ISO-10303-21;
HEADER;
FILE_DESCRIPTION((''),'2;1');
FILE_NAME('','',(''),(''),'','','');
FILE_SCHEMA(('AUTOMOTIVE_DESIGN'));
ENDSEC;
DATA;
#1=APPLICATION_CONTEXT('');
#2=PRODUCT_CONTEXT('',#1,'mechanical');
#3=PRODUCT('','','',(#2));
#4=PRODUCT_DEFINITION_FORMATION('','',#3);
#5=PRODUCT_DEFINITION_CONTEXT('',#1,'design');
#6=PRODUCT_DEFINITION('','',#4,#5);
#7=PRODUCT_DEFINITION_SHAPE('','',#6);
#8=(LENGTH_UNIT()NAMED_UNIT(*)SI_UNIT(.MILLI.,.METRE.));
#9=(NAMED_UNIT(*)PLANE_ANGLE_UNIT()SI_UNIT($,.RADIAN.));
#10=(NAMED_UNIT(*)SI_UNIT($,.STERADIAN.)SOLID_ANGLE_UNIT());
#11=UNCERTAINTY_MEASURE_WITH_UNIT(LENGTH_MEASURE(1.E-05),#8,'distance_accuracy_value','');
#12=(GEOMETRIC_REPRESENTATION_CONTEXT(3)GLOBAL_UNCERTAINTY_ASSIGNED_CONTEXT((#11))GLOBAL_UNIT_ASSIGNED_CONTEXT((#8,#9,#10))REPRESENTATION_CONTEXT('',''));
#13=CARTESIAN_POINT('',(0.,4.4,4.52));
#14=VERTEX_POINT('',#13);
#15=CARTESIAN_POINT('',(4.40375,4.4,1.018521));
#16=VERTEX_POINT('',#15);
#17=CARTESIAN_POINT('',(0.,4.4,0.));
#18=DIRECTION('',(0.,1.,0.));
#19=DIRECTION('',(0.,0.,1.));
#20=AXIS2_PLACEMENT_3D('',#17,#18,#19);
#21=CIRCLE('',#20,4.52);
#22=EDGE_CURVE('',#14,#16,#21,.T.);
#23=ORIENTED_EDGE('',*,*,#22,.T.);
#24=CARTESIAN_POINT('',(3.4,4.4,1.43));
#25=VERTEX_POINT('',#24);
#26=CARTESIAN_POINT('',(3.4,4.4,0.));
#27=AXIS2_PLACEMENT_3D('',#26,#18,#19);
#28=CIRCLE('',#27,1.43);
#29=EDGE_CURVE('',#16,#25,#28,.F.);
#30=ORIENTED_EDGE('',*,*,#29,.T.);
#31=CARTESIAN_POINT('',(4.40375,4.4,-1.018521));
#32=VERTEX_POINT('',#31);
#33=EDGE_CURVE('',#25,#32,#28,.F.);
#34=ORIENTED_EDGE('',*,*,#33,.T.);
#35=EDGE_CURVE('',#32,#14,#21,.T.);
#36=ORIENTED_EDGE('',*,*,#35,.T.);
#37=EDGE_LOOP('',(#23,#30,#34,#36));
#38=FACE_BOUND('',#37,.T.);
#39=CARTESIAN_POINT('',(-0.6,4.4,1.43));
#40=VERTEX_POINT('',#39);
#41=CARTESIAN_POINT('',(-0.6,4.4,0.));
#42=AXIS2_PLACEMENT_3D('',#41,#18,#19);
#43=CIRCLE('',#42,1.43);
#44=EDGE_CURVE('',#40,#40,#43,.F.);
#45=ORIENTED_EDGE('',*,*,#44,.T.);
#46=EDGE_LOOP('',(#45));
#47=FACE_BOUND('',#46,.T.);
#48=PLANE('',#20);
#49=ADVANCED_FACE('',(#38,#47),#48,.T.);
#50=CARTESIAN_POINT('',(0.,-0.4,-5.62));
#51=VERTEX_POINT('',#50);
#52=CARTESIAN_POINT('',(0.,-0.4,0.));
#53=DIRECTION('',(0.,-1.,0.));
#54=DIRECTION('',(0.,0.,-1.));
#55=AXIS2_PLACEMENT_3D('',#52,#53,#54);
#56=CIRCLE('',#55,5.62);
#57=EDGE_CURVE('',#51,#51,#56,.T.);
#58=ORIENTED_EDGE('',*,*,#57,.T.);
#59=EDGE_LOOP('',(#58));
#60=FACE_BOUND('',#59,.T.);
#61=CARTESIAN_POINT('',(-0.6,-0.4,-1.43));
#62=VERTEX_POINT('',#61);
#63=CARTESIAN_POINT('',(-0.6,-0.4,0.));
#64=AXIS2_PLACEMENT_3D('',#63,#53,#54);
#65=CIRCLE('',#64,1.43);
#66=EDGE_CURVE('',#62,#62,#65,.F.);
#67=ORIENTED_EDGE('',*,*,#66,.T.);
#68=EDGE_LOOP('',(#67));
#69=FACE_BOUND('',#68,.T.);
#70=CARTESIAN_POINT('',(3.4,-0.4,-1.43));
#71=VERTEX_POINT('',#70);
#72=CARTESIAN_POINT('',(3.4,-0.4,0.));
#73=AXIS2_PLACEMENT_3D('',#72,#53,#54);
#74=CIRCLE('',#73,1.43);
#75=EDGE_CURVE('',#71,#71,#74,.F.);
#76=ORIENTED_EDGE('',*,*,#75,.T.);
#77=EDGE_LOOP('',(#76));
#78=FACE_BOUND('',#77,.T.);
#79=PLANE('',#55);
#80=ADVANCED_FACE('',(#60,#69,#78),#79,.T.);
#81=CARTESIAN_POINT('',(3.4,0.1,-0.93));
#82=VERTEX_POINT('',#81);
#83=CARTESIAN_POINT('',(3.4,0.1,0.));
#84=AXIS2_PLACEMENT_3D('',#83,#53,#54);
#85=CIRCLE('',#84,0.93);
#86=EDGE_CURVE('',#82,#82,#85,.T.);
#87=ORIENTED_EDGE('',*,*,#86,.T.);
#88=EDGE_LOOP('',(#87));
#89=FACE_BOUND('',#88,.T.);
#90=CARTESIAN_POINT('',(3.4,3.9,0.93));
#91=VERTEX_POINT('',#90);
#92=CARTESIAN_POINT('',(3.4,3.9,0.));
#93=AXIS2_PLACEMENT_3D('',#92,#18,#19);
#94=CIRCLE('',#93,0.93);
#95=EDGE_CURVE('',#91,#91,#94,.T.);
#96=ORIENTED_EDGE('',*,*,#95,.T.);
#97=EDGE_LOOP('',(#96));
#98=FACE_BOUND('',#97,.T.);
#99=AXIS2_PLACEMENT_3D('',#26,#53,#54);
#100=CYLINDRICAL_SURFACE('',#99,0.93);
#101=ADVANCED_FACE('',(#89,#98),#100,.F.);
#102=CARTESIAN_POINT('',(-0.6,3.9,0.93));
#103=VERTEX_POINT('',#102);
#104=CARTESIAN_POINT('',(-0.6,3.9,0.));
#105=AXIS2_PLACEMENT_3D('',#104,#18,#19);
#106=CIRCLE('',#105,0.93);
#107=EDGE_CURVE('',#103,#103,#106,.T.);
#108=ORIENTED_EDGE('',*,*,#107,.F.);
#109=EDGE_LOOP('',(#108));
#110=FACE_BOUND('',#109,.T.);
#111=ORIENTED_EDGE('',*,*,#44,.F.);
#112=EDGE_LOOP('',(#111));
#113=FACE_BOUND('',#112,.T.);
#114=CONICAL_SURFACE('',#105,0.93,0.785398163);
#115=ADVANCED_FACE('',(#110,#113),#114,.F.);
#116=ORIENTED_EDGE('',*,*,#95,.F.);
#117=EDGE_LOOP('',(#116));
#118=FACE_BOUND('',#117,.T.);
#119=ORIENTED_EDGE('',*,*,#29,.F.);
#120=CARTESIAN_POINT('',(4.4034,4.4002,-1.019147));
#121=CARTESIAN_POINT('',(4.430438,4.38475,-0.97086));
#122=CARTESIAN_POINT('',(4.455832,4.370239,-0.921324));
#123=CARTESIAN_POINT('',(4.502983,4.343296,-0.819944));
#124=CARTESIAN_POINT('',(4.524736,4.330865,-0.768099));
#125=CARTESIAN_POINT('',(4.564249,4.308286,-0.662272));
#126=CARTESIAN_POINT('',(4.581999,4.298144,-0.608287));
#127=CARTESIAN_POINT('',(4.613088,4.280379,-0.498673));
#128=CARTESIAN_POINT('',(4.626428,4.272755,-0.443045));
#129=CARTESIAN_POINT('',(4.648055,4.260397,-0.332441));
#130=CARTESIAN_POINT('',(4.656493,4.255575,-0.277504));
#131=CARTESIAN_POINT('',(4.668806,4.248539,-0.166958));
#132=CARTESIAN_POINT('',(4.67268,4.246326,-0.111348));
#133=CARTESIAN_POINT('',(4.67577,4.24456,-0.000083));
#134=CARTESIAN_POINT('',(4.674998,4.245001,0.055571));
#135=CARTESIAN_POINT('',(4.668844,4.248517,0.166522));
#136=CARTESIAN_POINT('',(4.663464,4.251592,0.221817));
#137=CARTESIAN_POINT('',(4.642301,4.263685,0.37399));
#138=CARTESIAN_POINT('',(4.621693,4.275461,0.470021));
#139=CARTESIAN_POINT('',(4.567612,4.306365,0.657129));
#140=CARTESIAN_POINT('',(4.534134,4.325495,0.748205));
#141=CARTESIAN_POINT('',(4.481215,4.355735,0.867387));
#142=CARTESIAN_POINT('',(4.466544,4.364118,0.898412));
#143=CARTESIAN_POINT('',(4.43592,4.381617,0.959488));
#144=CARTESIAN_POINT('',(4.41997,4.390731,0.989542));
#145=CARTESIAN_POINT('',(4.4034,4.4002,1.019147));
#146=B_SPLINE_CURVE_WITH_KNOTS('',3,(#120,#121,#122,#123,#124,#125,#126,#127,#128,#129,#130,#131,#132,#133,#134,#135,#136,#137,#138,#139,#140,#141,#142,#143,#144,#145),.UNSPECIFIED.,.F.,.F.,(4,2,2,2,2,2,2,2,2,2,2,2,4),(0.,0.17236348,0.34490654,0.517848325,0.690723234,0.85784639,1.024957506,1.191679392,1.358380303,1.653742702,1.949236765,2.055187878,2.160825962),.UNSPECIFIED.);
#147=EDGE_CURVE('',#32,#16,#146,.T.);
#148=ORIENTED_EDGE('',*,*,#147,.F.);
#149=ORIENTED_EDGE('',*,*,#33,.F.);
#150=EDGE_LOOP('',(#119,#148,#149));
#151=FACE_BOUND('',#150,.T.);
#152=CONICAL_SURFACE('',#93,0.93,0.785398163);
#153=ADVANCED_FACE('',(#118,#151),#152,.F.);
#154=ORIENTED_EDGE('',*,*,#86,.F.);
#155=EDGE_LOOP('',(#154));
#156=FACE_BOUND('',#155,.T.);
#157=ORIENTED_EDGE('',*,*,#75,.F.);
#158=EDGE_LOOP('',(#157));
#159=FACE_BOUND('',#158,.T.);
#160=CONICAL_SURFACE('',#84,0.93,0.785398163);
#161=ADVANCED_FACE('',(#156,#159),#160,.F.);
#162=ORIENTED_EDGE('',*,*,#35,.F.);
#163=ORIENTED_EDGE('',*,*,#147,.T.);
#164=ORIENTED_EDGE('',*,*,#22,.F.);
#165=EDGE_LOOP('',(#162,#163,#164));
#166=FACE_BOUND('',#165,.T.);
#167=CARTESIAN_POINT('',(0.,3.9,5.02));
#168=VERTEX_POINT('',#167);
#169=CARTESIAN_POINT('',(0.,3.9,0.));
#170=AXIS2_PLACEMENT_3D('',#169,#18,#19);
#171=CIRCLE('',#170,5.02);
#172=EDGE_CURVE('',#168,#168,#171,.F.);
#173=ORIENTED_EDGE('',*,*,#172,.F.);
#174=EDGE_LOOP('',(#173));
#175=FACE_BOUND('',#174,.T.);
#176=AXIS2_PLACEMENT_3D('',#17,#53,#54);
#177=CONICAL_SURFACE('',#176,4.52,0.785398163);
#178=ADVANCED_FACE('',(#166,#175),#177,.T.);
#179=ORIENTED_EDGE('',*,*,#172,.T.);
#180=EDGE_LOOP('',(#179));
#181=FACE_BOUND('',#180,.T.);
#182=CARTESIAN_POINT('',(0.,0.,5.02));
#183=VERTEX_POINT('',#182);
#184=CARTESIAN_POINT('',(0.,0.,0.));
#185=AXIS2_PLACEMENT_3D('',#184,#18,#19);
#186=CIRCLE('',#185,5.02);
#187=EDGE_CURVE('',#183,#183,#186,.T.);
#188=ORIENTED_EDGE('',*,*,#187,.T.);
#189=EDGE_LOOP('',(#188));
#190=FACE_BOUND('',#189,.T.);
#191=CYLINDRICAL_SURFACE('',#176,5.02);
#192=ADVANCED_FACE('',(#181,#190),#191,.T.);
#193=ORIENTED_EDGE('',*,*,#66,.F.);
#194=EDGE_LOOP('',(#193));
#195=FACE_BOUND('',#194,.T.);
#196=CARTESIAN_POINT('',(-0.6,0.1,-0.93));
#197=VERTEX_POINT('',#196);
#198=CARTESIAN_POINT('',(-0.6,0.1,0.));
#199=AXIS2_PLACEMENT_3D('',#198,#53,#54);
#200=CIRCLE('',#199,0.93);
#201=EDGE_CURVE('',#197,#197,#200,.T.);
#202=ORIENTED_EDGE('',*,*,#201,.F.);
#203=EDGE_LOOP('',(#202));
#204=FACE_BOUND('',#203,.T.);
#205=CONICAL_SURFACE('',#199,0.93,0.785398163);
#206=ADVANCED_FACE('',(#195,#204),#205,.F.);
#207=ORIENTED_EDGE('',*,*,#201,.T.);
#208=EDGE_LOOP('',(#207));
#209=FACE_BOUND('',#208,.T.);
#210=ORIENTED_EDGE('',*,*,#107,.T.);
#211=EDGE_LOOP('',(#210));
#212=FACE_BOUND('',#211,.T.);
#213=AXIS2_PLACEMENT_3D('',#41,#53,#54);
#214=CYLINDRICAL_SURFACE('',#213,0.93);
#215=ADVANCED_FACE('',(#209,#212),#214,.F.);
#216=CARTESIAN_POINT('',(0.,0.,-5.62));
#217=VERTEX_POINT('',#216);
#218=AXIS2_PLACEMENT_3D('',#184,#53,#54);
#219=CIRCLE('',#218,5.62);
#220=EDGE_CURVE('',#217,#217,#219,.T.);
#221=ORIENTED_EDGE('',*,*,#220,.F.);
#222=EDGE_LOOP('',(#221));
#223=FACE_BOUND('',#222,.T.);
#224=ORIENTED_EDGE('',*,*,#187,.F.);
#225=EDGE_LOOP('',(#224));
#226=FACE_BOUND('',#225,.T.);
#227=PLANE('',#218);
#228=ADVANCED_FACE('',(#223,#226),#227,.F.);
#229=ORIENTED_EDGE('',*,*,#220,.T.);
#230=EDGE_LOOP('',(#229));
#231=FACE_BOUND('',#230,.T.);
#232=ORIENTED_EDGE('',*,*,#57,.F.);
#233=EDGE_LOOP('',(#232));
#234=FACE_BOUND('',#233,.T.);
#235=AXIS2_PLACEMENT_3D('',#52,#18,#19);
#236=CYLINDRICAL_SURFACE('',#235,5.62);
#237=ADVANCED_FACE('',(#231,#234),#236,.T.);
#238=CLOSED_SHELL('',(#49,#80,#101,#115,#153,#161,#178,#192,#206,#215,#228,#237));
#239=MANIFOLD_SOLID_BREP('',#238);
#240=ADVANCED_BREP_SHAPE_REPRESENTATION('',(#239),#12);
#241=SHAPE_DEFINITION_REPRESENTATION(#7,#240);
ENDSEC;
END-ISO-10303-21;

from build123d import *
from build123d.topology import SkipClean

# Parameters (mm, degrees)
SKETCH_1_R      = 5.02
SKETCH_1_R_2    = 0.93
EXTRUDE_1_DEPTH = 4.4
EXTRUDE_START   = 0.4
SKETCH_3_R      = 5.62
SKETCH_3_R_2    = 0.93
EXTRUDE_2_DEPTH = 0.4
CHAMFER_1_SIZE  = 0.5


with BuildPart() as part:
    # 草图1 → 凸台-拉伸1 (new body)
    with BuildSketch(Plane(origin=(0, 0, 0), x_dir=(1, 0, 0), z_dir=(0, 1, 0))):
        with Locations(Location((0, 0, 0), (0, 0, 270))):
            Circle(SKETCH_1_R)
        with Locations(Location((3.4, 0, 0), (0, 0, 270))):
            Circle(SKETCH_1_R_2, mode=Mode.SUBTRACT)
        with Locations(Location((-0.6, 0, 0), (0, 0, 90))):
            Circle(SKETCH_1_R_2, mode=Mode.SUBTRACT)
    extrude(amount=EXTRUDE_1_DEPTH)

    # 草图3 → 凸台-拉伸2 (add)
    with SkipClean():  # the faces are left unmerged after this step: merging them gives an invalid solid
        with BuildSketch(Plane.XZ.offset(EXTRUDE_START)):
            with Locations(Location((0, 0, 0), (0, 0, 270))):
                Circle(SKETCH_3_R)
            with Locations(Location((3.4, 0, 0), (0, 0, 270))):
                Circle(SKETCH_3_R_2, mode=Mode.SUBTRACT)
            with Locations(Location((-0.6, 0, 0), (0, 0, 270))):
                Circle(SKETCH_3_R_2, mode=Mode.SUBTRACT)
        extrude(amount=-EXTRUDE_2_DEPTH)

    # 倒角1
    # the kernel refuses this chamfer: 0.5 mm, written as the material it takes off along each edge
    with BuildSketch(Plane(origin=(3.4, -0.4, 0), x_dir=(0, 0, -1), z_dir=(-1, 0, 0))) as chamfer_1_piece_1:
        Polygon((0.93 + CHAMFER_1_SIZE, 0), (0.93, -CHAMFER_1_SIZE), (0.93, 0), align=None)
    revolve(axis=Axis((3.4, -0.4, 0), (0, -1, 0)), mode=Mode.SUBTRACT)
    with BuildSketch(Plane(origin=(-0.6, -0.4, 0), x_dir=(0, 0, -1), z_dir=(-1, 0, 0))) as chamfer_1_piece_2:
        Polygon((0.93 + CHAMFER_1_SIZE, 0), (0.93, -CHAMFER_1_SIZE), (0.93, 0), align=None)
    revolve(axis=Axis((-0.6, -0.4, 0), (0, -1, 0)), mode=Mode.SUBTRACT)
    with BuildSketch(Plane(origin=(0, 4.4, 0), x_dir=(0, 0, 1), z_dir=(-1, 0, 0))) as chamfer_1_piece_3:
        Polygon((5.02, -CHAMFER_1_SIZE), (5.02 - CHAMFER_1_SIZE, 0), (5.02, 0), align=None)
    revolve(axis=Axis((0, 4.4, 0), (0, 1, 0)), mode=Mode.SUBTRACT)
    with BuildSketch(Plane(origin=(3.4, 4.4, 0), x_dir=(0, 0, 1), z_dir=(-1, 0, 0))) as chamfer_1_piece_4:
        Polygon((0.93 + CHAMFER_1_SIZE, 0), (0.93, -CHAMFER_1_SIZE), (0.93, 0), align=None)
    revolve(axis=Axis((3.4, 4.4, 0), (0, 1, 0)), mode=Mode.SUBTRACT)
    with BuildSketch(Plane(origin=(-0.6, 4.4, 0), x_dir=(0, 0, -1), z_dir=(1, 0, 0))) as chamfer_1_piece_5:
        Polygon((0.93 + CHAMFER_1_SIZE, 0), (0.93, -CHAMFER_1_SIZE), (0.93, 0), align=None)
    revolve(axis=Axis((-0.6, 4.4, 0), (0, 1, 0)), mode=Mode.SUBTRACT)


solid = part.part
